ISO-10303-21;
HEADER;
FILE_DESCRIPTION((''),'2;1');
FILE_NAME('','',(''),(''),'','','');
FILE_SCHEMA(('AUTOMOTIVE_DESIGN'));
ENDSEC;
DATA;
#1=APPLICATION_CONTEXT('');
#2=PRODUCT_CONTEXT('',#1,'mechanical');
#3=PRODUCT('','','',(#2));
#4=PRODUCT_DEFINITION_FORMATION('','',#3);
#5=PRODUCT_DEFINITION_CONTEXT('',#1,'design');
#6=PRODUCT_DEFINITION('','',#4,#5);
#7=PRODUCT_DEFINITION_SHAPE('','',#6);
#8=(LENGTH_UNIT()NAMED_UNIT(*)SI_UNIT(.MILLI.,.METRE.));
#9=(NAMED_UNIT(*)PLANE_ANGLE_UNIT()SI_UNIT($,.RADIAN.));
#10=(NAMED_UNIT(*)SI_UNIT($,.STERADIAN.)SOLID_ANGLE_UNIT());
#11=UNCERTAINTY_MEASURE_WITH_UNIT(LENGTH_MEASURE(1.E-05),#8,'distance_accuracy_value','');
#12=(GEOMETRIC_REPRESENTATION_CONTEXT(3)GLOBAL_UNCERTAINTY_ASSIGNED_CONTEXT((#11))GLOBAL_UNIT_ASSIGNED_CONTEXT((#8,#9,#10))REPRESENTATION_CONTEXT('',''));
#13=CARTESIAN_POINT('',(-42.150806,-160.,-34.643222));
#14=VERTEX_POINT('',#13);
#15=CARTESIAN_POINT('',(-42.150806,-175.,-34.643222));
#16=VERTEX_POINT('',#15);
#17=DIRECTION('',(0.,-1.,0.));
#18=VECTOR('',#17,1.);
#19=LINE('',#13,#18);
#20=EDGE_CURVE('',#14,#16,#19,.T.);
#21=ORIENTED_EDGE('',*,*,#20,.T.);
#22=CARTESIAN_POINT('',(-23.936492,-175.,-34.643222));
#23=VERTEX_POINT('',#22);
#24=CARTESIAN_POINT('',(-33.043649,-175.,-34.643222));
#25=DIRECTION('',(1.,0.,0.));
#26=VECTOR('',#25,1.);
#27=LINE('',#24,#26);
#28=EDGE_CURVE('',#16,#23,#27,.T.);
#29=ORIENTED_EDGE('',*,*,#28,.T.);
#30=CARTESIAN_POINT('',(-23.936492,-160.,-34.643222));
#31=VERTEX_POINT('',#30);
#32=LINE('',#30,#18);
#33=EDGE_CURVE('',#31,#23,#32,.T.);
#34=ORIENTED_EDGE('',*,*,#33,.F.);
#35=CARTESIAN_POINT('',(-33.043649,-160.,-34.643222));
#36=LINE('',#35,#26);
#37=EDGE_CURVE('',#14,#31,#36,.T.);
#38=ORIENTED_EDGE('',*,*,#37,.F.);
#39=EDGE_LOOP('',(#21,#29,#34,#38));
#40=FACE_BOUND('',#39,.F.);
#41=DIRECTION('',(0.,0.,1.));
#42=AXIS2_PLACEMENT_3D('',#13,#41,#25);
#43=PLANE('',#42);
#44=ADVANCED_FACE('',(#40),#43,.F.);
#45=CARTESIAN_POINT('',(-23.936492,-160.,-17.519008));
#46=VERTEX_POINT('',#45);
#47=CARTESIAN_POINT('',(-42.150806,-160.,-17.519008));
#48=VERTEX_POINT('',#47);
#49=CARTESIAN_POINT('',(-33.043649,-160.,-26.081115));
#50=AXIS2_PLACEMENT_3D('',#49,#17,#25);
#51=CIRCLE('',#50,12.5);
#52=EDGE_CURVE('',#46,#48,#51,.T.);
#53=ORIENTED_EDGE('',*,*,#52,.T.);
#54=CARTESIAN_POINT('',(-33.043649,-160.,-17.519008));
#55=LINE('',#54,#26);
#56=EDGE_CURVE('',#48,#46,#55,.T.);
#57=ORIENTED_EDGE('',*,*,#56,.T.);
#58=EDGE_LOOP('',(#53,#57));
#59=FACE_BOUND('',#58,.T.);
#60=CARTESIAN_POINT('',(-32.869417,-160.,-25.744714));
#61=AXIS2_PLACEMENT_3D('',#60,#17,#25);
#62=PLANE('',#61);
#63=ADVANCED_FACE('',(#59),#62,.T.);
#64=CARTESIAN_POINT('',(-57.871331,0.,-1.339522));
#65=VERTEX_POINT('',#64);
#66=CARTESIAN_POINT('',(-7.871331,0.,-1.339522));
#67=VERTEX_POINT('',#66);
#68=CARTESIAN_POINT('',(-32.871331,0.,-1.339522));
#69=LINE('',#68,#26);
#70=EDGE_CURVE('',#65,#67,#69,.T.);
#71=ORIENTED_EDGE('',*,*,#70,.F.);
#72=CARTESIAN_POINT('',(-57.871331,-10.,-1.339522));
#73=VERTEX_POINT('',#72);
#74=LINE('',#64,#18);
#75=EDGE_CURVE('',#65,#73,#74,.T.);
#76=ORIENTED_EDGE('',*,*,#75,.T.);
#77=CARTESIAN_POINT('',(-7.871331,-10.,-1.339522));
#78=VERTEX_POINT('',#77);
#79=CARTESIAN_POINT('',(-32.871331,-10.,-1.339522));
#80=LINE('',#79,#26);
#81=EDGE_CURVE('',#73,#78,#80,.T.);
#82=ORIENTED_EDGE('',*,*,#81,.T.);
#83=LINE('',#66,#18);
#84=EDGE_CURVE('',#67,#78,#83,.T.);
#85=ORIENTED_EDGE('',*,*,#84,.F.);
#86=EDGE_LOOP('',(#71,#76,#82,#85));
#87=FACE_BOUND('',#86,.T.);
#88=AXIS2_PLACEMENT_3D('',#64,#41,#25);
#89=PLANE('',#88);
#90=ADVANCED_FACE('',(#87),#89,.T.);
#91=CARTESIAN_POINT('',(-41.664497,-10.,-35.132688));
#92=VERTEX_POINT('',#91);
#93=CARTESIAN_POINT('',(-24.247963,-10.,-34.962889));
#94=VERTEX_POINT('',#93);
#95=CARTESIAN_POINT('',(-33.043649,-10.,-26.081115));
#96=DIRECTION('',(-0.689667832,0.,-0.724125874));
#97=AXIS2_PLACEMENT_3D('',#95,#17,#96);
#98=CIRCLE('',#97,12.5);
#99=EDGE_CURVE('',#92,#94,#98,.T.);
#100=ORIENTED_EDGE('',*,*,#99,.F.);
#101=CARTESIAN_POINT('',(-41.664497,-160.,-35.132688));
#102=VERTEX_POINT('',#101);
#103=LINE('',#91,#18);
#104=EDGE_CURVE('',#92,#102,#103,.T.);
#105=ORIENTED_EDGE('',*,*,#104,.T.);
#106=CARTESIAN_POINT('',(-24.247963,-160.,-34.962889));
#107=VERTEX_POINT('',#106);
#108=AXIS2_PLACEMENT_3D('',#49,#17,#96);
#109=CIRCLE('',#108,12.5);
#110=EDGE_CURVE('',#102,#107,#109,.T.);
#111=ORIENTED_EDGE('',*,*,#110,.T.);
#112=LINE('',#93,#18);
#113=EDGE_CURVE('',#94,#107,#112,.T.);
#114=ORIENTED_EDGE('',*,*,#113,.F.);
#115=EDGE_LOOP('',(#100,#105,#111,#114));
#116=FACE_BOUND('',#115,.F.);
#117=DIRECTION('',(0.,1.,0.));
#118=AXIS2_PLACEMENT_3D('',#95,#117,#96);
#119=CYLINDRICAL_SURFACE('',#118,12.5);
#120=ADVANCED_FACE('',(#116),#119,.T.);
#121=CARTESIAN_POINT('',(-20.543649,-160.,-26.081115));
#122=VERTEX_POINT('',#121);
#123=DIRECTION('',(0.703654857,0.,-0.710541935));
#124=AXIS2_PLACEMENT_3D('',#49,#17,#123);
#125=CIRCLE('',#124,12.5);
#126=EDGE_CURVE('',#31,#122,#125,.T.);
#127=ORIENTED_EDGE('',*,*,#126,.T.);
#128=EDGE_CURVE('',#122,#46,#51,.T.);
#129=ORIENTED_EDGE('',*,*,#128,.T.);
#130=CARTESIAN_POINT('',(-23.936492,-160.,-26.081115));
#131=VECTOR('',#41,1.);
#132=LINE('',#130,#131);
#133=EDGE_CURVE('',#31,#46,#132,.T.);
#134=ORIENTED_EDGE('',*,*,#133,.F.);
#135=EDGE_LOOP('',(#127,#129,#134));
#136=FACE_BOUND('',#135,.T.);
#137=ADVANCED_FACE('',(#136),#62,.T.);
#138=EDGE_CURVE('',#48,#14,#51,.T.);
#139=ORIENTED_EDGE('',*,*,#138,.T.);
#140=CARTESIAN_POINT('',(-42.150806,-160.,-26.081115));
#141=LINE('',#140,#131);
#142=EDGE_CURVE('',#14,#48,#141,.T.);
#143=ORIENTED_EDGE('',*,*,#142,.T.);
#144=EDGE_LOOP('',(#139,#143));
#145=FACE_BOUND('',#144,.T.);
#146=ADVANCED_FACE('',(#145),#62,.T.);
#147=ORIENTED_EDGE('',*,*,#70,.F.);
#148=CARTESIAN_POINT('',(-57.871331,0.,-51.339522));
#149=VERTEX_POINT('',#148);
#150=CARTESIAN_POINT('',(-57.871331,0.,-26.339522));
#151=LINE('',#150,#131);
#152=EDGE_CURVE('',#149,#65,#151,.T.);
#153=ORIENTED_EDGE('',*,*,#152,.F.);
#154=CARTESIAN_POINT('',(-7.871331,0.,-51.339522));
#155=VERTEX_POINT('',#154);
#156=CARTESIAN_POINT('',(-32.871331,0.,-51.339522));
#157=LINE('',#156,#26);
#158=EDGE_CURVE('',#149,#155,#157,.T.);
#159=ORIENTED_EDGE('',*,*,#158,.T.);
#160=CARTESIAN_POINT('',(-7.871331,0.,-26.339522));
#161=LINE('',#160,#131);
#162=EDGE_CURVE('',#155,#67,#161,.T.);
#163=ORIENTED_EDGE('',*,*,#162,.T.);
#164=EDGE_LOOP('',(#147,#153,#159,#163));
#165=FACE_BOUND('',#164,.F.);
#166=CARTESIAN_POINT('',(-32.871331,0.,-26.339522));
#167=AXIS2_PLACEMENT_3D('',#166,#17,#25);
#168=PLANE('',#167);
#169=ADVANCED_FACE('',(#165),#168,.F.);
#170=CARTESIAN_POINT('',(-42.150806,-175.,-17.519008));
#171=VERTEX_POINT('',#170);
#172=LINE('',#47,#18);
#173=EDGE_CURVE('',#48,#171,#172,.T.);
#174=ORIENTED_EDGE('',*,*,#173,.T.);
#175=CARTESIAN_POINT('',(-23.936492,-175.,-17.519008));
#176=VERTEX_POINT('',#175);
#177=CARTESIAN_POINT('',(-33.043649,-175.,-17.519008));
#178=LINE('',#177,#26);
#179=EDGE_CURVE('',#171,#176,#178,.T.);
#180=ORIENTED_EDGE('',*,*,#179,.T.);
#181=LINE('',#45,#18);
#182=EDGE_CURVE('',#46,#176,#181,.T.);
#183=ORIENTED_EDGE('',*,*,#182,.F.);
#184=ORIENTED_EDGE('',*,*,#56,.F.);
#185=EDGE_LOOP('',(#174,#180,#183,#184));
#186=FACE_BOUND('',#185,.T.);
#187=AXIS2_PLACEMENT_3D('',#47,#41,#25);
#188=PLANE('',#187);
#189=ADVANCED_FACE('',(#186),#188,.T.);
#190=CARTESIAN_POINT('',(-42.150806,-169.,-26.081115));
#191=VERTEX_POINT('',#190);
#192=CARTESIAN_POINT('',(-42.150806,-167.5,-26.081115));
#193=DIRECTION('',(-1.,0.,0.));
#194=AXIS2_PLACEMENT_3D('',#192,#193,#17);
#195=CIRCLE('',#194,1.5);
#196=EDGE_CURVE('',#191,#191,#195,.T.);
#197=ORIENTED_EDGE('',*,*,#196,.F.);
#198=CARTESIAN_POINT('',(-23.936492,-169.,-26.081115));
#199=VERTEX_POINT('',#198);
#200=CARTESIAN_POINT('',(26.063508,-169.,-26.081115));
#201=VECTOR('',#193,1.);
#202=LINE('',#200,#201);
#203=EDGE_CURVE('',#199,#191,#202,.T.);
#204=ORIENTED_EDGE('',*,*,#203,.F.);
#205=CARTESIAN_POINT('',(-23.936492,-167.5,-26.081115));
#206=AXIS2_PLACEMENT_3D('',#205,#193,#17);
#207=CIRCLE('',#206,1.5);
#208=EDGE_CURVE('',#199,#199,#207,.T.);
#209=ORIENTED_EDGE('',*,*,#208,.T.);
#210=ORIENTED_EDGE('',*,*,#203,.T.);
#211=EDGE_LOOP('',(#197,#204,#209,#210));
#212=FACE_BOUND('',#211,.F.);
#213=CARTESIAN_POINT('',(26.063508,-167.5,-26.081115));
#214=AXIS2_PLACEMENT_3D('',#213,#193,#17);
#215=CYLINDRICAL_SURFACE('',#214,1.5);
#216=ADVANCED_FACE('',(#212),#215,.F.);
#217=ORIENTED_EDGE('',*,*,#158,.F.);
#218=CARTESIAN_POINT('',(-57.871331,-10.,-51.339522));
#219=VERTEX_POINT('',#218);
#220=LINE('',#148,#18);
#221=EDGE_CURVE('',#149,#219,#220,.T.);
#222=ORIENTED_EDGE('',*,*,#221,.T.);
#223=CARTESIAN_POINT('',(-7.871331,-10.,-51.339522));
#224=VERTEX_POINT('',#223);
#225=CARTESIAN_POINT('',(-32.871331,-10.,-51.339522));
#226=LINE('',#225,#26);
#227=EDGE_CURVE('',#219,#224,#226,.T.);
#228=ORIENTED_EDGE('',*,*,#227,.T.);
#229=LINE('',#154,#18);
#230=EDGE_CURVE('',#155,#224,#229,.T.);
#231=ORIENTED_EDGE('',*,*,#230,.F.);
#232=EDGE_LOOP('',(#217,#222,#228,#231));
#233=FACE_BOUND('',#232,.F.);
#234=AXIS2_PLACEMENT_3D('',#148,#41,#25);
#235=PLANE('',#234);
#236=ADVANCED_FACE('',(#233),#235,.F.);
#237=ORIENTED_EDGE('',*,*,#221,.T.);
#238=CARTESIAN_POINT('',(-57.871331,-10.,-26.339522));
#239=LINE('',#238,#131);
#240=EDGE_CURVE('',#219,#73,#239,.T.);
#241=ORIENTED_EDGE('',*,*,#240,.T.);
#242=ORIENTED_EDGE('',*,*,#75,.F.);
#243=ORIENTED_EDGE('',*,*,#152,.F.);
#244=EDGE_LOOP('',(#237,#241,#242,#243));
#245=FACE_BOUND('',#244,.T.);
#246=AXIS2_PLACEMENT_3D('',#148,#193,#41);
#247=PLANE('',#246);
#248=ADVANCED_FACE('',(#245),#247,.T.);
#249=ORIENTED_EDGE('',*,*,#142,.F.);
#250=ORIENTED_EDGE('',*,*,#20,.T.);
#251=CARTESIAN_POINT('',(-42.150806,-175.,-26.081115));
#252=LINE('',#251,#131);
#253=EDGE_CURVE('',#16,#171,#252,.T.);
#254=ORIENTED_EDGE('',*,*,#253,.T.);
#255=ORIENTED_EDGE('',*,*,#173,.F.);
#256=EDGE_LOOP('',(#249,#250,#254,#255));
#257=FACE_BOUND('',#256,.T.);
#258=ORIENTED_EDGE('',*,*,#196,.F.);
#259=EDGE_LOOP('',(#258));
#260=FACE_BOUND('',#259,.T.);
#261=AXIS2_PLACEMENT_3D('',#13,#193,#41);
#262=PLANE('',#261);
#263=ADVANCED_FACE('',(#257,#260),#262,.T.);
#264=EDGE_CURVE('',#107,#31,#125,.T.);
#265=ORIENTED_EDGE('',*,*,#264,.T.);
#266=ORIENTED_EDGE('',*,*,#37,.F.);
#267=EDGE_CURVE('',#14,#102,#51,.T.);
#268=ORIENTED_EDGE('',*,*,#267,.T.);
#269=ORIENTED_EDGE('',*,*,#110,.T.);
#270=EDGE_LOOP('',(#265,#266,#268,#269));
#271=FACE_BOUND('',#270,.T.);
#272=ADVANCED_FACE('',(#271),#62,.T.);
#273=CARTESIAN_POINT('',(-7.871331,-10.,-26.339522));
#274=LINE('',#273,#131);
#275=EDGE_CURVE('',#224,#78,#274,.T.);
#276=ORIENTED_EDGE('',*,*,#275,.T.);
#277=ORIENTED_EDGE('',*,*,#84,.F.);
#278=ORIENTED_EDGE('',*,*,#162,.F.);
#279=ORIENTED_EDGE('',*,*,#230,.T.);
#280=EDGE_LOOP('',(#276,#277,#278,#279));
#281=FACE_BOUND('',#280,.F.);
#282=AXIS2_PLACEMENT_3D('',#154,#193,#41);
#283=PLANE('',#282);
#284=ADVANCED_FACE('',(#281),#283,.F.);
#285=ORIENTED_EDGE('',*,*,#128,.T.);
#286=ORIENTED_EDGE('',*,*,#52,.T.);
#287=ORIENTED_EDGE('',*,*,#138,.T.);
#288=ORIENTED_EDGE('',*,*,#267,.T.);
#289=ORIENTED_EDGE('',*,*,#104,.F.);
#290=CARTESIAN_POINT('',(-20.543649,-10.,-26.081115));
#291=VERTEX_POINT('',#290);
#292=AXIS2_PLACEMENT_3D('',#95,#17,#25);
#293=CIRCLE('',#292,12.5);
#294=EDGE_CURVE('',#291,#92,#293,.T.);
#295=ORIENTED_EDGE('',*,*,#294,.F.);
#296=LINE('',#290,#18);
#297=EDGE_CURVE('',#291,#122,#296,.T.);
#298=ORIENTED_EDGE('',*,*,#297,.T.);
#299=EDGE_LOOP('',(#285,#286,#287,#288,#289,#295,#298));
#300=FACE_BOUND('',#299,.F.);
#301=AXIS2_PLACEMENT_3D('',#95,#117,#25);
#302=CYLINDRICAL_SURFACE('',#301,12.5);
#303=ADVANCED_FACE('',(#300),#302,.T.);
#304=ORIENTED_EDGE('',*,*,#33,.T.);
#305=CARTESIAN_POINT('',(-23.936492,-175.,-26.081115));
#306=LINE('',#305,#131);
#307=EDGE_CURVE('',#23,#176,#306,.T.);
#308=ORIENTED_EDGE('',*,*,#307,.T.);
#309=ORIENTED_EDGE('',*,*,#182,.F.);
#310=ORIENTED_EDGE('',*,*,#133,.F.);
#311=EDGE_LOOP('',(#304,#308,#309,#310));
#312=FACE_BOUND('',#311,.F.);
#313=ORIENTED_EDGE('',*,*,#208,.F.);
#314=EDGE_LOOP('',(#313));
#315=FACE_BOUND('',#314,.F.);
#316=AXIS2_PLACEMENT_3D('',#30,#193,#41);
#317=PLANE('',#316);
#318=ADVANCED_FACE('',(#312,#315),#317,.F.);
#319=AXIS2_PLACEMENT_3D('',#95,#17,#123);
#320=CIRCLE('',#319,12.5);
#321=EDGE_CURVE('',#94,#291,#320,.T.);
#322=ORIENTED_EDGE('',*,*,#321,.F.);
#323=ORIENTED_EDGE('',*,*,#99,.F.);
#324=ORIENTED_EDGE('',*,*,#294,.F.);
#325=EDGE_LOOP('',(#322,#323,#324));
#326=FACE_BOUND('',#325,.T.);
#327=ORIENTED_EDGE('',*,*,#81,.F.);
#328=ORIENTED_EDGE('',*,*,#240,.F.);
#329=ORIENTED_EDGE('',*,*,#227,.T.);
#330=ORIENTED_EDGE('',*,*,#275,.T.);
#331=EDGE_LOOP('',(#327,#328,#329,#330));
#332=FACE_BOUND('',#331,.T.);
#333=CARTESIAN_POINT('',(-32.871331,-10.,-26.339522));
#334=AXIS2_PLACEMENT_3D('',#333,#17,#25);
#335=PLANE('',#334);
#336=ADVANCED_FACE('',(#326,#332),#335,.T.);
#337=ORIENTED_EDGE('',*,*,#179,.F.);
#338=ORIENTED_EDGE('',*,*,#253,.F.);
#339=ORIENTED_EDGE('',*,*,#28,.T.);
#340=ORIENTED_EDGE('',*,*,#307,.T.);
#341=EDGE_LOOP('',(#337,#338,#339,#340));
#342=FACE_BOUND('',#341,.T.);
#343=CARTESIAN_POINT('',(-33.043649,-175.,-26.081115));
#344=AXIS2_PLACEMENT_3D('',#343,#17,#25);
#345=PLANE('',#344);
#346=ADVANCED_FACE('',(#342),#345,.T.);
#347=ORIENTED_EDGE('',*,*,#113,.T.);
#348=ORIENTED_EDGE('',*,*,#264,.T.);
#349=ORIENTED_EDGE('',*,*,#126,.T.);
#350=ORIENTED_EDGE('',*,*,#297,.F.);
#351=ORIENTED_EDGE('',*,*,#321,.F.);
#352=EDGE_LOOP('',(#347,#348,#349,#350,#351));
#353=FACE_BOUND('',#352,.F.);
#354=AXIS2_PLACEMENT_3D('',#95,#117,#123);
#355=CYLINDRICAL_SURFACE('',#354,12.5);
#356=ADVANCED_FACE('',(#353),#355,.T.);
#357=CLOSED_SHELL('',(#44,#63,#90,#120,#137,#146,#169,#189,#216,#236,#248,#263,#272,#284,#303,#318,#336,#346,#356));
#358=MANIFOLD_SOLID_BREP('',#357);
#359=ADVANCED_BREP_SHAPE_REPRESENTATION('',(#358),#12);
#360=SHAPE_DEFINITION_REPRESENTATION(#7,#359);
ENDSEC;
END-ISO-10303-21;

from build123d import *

# Parameters (mm, degrees)
F0_W     = 50
F0_H     = 50
F1_DEPTH = 10
F4_DEPTH = 150
F5_W     = 18.2143148659
F5_H     = 17.1242148423
F6_DEPTH = 15
F8_D     = 3
F8_DEPTH = 50
F8_TIP   = 0.9012909285


with BuildPart() as f1:
    # F0 (on Front) → F1 (new body)
    with BuildSketch(Plane.XZ):
        with Locations((-32.8713305295, -26.3395220041)):
            Rectangle(F0_W, F0_H)
    extrude(amount=F1_DEPTH)

    # F3 (on face) → F4 (join)
    with BuildSketch(Plane.XZ.offset(10)):
        with BuildLine():
            ThreePointArc((-27.7835671151, -31.4272854184), (-26.1262573971, -28.9793373511), (-25.5436490476, -26.0811150074))
            ThreePointArc((-25.5436490476, -26.0811150074), (-36.0539043669, -19.2117363664), (-38.1272124911, -31.5954039658))
            Line((-38.1272124911, -31.5954039658), (-32.8713305295, -26.3395220041))
            Line((-32.8713305295, -26.3395220041), (-27.7835671151, -31.4272854184))
        make_face()
        with BuildLine():
            ThreePointArc((-38.1272124911, -31.5954039658), (-36.0539043669, -19.2117363664), (-25.5436490476, -26.0811150074))
            ThreePointArc((-25.5436490476, -26.0811150074), (-26.1262573971, -28.9793373511), (-27.7835671151, -31.4272854184))
            Line((-27.7835671151, -31.4272854184), (-24.2479633333, -34.9628892003))
            ThreePointArc((-24.2479633333, -34.9628892003), (-21.5068368486, -30.8927638189), (-20.5436490476, -26.0811150074))
            ThreePointArc((-20.5436490476, -26.0811150074), (-37.9675398455, -14.5917590894), (-41.6644969533, -35.1326884279))
            Line((-41.6644969533, -35.1326884279), (-38.1272124911, -31.5954039658))
        make_face()
        with BuildLine():
            Line((-32.8713305295, -26.3395220041), (-38.1272124911, -31.5954039658))
            ThreePointArc((-38.1272124911, -31.5954039658), (-32.921765268, -33.580124565), (-27.7835671151, -31.4272854184))
            Line((-27.7835671151, -31.4272854184), (-32.8713305295, -26.3395220041))
        make_face()
        with BuildLine():
            ThreePointArc((-27.7835671151, -31.4272854184), (-32.921765268, -33.580124565), (-38.1272124911, -31.5954039658))
            Line((-38.1272124911, -31.5954039658), (-41.6644969533, -35.1326884279))
            ThreePointArc((-41.6644969533, -35.1326884279), (-32.9217884335, -38.5805209929), (-24.2479633333, -34.9628892003))
            Line((-24.2479633333, -34.9628892003), (-27.7835671151, -31.4272854184))
        make_face()
    extrude(amount=F4_DEPTH)

    # F5 (on face) → F6 (join)
    with BuildSketch(Plane.XZ.offset(160)):
        with Locations((-33.0436490476, -26.0811150074)):
            Rectangle(F5_W, F5_H)
    extrude(amount=F6_DEPTH)

    # F8
    with Locations(Plane.YZ.offset(-23.9364916147)):
        with Locations((-167.5, -26.0811150074)):
            Hole(F8_D / 2, depth=F8_DEPTH)
            with Locations((0, 0, -(F8_DEPTH + F8_TIP / 2))):  # 118° drill point
                Cone(0, F8_D / 2, F8_TIP, mode=Mode.SUBTRACT)


solid = f1.part
